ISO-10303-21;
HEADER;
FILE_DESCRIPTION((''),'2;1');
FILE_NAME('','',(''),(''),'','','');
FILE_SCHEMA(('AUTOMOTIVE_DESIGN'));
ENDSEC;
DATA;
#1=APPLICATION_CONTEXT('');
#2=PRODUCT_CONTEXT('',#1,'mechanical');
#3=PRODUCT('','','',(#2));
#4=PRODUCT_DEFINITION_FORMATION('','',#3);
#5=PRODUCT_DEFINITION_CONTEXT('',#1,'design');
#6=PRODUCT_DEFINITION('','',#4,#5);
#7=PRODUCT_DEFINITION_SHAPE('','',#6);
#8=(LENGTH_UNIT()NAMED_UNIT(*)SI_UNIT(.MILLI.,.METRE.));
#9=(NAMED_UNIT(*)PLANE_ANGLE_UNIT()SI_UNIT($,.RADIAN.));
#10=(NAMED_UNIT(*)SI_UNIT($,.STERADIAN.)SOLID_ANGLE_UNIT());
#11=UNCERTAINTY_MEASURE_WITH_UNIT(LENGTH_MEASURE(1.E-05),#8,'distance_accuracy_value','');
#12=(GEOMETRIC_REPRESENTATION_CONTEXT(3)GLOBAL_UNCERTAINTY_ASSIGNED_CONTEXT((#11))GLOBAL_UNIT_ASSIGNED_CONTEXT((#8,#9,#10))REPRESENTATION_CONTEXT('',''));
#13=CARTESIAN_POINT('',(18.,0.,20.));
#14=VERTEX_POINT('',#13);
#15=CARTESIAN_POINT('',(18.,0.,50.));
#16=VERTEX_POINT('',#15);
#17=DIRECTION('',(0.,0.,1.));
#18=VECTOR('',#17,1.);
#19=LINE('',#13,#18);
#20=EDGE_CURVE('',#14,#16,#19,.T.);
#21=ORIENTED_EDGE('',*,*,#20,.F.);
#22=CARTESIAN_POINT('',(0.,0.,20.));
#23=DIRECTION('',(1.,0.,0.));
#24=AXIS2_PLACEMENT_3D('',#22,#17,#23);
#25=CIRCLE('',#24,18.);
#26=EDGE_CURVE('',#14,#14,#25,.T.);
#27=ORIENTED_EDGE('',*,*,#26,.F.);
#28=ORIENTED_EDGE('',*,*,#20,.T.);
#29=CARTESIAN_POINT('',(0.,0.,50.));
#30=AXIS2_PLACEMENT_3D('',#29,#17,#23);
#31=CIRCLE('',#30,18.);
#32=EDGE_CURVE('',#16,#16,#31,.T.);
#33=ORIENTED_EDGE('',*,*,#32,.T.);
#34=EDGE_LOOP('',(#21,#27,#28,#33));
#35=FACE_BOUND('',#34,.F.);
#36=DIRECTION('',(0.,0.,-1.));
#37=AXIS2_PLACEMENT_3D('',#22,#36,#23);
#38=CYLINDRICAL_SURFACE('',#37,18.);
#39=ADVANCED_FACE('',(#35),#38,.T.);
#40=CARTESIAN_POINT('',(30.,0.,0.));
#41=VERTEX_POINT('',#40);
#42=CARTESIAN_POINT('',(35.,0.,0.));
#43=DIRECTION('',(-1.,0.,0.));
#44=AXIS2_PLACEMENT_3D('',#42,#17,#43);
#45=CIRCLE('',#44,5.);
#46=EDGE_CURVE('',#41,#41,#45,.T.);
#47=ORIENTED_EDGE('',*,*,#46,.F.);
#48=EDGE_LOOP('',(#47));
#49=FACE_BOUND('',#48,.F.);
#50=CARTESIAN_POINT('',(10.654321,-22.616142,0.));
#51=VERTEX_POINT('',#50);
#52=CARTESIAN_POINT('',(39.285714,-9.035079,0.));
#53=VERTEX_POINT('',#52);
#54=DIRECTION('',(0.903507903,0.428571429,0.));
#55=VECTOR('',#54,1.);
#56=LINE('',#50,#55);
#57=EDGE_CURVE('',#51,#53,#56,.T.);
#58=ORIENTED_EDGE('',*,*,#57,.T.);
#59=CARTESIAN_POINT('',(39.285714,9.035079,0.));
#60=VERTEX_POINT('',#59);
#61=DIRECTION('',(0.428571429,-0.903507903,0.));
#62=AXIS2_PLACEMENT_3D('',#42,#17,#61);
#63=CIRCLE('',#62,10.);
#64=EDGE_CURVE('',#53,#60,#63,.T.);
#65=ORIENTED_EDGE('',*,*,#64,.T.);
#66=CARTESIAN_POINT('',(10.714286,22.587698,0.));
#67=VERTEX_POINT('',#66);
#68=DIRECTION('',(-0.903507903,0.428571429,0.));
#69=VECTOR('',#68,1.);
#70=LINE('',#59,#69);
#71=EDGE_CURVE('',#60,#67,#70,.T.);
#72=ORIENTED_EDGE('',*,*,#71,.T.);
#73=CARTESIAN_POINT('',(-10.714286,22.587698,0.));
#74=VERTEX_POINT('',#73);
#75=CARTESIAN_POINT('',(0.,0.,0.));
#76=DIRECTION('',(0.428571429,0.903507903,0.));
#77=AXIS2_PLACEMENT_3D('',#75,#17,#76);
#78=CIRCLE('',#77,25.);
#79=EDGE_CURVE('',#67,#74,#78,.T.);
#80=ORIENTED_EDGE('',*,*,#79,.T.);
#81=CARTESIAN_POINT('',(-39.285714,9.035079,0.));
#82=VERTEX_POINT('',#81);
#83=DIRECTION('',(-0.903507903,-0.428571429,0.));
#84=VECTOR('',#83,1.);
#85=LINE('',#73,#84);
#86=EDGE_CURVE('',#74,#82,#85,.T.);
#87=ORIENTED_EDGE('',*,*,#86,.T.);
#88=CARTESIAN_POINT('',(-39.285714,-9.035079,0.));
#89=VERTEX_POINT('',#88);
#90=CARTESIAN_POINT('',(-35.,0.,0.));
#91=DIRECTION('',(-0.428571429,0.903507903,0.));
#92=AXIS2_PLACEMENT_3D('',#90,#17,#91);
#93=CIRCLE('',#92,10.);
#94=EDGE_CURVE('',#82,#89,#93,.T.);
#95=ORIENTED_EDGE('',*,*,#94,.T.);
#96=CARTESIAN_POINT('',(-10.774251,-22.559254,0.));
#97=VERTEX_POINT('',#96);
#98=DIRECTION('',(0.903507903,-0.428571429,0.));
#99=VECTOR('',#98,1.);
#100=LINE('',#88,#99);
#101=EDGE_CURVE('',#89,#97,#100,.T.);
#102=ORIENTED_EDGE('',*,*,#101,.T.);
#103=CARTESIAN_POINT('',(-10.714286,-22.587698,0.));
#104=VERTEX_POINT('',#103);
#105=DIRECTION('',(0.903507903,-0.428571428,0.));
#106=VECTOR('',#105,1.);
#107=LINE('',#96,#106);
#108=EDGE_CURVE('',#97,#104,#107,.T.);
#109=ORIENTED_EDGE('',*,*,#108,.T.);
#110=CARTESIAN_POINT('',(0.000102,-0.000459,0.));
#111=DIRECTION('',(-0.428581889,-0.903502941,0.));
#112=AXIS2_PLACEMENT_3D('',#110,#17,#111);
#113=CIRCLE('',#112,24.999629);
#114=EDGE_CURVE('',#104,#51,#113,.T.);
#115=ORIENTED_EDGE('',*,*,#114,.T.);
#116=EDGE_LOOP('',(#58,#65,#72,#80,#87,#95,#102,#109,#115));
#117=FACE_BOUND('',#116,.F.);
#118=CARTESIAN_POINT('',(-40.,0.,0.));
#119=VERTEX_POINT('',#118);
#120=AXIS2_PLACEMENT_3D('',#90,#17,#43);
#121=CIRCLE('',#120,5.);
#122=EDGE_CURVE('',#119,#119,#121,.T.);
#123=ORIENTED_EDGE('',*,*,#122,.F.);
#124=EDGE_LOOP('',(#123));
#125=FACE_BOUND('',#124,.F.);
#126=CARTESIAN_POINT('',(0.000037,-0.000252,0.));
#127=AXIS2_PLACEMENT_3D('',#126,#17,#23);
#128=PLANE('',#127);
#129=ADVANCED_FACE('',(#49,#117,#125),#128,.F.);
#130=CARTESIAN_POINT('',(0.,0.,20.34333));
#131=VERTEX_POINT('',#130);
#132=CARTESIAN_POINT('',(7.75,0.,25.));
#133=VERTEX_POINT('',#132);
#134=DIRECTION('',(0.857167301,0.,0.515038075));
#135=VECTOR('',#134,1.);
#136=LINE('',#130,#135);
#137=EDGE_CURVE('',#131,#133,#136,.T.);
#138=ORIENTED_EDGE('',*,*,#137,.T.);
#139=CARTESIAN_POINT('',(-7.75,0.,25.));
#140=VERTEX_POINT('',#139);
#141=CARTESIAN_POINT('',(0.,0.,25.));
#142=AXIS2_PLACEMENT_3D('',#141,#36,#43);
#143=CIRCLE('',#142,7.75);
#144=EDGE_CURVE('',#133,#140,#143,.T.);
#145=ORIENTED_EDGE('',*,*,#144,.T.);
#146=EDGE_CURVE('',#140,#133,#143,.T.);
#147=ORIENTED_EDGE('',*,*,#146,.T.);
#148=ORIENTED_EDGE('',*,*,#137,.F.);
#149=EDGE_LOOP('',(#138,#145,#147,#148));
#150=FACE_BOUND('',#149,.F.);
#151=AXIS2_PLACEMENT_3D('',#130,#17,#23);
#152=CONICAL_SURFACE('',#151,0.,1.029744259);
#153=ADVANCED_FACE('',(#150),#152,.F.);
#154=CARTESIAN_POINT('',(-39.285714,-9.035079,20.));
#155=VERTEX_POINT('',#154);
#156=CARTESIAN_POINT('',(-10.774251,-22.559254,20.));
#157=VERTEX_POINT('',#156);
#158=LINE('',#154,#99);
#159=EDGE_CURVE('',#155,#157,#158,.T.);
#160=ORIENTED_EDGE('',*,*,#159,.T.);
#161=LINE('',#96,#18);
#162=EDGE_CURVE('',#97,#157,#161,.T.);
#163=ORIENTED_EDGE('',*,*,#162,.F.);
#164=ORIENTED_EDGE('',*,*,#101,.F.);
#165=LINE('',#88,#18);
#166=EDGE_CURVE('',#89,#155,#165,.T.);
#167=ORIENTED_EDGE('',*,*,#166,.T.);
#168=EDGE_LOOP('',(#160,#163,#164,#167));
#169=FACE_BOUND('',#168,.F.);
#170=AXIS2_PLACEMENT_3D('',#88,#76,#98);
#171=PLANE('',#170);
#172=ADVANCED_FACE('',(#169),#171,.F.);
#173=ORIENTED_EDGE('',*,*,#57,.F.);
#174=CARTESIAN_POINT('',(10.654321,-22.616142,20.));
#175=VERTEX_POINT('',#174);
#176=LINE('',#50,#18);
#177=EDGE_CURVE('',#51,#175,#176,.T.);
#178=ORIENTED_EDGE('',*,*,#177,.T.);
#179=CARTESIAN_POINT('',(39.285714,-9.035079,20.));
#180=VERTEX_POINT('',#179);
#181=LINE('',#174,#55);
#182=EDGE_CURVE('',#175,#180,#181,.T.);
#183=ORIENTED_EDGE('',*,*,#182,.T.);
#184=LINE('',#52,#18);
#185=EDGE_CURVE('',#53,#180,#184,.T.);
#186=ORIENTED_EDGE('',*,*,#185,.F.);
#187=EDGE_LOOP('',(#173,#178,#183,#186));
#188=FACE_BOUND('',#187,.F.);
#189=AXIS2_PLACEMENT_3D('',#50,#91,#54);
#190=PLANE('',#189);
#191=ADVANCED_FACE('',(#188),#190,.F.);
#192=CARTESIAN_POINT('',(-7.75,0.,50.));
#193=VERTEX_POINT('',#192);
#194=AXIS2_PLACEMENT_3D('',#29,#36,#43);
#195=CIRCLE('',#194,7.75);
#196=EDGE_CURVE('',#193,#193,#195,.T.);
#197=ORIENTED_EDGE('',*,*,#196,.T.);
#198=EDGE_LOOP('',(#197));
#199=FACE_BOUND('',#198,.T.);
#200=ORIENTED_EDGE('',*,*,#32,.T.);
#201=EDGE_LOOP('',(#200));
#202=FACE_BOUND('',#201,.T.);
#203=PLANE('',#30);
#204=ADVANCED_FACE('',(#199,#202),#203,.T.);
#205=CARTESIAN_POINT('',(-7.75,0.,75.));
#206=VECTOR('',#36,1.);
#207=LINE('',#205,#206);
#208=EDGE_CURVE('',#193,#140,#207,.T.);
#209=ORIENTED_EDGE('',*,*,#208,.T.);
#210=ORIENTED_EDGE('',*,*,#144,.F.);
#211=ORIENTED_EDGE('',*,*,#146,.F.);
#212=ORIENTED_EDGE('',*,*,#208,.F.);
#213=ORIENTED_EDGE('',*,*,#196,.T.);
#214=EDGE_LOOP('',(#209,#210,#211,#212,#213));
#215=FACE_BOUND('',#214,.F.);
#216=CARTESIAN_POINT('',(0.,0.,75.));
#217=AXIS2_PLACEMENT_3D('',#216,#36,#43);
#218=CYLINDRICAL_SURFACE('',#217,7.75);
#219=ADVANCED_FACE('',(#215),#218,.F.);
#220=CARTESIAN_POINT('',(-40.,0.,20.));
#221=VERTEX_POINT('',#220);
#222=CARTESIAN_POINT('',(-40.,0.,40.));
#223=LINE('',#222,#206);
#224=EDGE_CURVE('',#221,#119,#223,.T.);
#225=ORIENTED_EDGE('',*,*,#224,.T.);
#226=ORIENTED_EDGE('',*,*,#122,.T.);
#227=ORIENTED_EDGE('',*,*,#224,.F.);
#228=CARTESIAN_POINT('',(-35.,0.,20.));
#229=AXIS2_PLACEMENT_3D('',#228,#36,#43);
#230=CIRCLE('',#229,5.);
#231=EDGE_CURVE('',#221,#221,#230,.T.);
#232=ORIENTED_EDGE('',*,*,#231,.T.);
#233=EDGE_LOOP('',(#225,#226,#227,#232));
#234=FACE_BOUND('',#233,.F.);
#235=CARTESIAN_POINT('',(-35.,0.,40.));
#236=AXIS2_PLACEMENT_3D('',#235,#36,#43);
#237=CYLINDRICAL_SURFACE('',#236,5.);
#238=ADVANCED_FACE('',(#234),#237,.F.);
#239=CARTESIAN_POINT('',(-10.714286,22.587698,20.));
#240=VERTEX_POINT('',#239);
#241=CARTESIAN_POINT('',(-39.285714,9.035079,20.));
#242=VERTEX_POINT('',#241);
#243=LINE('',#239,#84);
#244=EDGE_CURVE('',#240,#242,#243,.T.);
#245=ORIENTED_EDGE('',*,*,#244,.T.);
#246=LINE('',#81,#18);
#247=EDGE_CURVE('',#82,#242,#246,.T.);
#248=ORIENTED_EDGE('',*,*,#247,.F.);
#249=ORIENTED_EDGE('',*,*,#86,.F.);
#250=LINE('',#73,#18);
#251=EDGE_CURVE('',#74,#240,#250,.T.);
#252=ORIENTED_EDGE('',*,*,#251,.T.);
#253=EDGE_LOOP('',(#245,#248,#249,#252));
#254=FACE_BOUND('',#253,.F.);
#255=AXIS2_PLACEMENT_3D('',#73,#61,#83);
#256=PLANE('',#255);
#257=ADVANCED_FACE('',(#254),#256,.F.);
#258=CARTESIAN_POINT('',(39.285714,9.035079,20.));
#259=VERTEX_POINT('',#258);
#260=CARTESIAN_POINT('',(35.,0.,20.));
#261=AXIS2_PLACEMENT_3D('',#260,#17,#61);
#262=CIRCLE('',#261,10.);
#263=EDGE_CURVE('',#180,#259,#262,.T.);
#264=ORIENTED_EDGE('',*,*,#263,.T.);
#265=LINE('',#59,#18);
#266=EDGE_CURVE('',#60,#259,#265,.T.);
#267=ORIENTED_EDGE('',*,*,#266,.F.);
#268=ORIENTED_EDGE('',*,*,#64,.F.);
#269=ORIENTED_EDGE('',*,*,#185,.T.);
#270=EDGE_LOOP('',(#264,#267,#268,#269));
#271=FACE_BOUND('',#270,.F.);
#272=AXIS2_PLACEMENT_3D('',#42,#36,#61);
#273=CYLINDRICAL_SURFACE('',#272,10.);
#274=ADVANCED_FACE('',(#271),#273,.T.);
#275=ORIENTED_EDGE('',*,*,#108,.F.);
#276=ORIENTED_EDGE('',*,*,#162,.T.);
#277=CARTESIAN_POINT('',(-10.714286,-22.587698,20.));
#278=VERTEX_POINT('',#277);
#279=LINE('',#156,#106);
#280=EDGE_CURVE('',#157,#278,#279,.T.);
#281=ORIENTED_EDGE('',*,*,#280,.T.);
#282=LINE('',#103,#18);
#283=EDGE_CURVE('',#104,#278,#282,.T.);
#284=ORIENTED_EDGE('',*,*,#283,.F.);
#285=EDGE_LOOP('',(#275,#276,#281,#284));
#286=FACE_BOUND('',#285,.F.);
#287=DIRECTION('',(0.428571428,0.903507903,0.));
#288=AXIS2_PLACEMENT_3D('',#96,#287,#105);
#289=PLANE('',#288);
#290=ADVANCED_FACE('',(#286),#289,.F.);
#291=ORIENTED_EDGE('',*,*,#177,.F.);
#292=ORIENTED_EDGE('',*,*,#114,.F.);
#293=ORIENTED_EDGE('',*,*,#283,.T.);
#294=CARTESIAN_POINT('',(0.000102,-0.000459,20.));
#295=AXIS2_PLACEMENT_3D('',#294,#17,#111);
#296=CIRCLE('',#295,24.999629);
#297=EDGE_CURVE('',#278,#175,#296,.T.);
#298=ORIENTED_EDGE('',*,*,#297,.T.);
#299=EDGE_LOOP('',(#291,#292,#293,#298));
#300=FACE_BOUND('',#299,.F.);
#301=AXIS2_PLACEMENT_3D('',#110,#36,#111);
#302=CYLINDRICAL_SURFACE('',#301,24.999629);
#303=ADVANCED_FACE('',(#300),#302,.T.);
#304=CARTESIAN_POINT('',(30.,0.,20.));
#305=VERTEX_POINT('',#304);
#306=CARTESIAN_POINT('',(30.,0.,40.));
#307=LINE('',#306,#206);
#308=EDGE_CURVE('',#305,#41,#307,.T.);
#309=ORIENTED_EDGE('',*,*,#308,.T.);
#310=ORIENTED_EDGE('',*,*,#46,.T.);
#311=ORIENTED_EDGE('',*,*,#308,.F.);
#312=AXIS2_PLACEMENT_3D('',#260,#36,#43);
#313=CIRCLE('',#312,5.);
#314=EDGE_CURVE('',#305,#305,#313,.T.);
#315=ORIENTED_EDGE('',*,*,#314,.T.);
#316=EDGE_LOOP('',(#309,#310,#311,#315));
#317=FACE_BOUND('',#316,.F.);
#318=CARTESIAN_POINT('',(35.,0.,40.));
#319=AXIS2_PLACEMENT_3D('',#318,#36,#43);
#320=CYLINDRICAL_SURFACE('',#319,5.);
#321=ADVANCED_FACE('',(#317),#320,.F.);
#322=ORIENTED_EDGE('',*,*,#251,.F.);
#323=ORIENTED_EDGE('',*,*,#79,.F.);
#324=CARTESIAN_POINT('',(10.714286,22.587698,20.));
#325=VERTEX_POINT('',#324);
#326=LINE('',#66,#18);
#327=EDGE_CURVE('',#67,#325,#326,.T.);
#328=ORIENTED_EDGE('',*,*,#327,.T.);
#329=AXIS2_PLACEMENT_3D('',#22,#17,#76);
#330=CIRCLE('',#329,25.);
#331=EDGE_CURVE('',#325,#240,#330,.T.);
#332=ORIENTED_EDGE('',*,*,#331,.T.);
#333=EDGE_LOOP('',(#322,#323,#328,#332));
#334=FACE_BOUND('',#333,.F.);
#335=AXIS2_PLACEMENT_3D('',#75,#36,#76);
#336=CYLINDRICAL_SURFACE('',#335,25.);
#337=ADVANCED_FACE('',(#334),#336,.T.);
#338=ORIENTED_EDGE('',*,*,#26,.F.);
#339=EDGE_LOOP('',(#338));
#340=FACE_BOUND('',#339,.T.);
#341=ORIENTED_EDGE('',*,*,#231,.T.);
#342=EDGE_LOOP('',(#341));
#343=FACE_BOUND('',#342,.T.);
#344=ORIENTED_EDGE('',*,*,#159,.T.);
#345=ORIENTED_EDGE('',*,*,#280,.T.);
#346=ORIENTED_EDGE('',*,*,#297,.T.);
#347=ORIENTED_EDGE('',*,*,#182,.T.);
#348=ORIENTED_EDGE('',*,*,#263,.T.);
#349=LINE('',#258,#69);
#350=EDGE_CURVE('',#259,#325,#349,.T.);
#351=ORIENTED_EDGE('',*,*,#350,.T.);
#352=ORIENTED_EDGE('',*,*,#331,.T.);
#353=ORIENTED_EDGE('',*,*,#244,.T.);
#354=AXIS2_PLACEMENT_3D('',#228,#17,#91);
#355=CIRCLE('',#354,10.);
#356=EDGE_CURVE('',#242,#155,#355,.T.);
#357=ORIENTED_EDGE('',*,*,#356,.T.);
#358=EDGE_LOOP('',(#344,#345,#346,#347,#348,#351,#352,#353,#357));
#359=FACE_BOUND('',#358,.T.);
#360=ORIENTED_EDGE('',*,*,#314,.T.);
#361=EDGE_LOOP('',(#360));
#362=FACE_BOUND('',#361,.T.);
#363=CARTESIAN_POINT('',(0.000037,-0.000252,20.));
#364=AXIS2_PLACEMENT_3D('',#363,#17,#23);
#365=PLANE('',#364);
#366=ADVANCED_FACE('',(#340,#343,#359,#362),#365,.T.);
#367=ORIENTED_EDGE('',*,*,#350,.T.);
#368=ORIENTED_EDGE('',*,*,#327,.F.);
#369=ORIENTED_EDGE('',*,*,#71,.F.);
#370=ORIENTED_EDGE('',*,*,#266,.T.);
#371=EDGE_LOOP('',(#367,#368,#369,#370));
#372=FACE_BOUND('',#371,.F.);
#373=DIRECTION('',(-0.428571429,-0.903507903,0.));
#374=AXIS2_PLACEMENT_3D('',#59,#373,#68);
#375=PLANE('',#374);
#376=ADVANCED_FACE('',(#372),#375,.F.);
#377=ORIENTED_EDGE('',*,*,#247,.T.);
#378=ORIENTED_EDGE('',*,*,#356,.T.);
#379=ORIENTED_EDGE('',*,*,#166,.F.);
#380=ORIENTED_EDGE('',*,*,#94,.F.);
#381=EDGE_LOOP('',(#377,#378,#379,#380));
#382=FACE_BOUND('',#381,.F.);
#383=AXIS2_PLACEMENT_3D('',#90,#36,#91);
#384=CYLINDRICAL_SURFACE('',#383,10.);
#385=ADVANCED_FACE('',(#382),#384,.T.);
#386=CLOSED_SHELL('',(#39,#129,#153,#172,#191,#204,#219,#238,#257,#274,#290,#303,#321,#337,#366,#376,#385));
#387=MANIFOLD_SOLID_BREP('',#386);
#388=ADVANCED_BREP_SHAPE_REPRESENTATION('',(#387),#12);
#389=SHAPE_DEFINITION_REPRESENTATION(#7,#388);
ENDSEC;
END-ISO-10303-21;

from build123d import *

# Parameters (mm, degrees)
F1_DEPTH = 20
F3_D     = 10
F3_DEPTH = 20
F3_TIP   = 3.0043030951
F4_R     = 18
F5_DEPTH = 30
F7_D     = 15.5
F7_DEPTH = 25
F7_TIP   = 4.6566697975


# Not quite as in the source:
# - ends of sketch curves that miss each other by under 0.0002 mm in the source are joined


with BuildPart() as f1:
    # F0 (on Top) → F1 (new body)
    with BuildSketch(Plane.XY):
        with BuildLine():
            Line((-10.7142857143, 22.5876975726), (-39.2857142857, 9.0350790291))
            ThreePointArc((-39.2857142857, 9.0350790291), (-45, 0), (-39.2857142857, -9.0350790291))
            Line((-39.2857142857, -9.0350790291), (-10.7742508272, -22.5592536221))
            Line((-10.7742508272, -22.5592536221), (-10.7142857143, -22.5876975726))
            ThreePointArc((-10.7142857143, -22.5876975726), (-0.0331846382, -25.000066073), (10.6543206014, -22.6161415232))
            Line((10.6543206014, -22.6161415232), (39.2857142857, -9.0350790291))
            ThreePointArc((39.2857142857, -9.0350790291), (45, 0), (39.2857142857, 9.0350790291))
            Line((39.2857142857, 9.0350790291), (10.7142857143, 22.5876975726))
            ThreePointArc((10.7142857143, 22.5876975726), (0, 25), (-10.7142857143, 22.5876975726))
        make_face()
    extrude(amount=F1_DEPTH)

    # F3
    with Locations(Plane.XY.offset(20)):
        with Locations((-35, 0), (35, 0)):
            Hole(F3_D / 2, depth=F3_DEPTH)
            with Locations((0, 0, -(F3_DEPTH + F3_TIP / 2))):  # 118° drill point
                Cone(0, F3_D / 2, F3_TIP, mode=Mode.SUBTRACT)

    # F4 (on face) → F5 (join)
    with BuildSketch(Plane.XY.offset(20)):
        Circle(F4_R)
    extrude(amount=F5_DEPTH)

    # F7
    with Locations(Plane.XY.offset(50)):
        with Locations((0, 0)):
            Hole(F7_D / 2, depth=F7_DEPTH)
            with Locations((0, 0, -(F7_DEPTH + F7_TIP / 2))):  # 118° drill point
                Cone(0, F7_D / 2, F7_TIP, mode=Mode.SUBTRACT)


solid = f1.part
